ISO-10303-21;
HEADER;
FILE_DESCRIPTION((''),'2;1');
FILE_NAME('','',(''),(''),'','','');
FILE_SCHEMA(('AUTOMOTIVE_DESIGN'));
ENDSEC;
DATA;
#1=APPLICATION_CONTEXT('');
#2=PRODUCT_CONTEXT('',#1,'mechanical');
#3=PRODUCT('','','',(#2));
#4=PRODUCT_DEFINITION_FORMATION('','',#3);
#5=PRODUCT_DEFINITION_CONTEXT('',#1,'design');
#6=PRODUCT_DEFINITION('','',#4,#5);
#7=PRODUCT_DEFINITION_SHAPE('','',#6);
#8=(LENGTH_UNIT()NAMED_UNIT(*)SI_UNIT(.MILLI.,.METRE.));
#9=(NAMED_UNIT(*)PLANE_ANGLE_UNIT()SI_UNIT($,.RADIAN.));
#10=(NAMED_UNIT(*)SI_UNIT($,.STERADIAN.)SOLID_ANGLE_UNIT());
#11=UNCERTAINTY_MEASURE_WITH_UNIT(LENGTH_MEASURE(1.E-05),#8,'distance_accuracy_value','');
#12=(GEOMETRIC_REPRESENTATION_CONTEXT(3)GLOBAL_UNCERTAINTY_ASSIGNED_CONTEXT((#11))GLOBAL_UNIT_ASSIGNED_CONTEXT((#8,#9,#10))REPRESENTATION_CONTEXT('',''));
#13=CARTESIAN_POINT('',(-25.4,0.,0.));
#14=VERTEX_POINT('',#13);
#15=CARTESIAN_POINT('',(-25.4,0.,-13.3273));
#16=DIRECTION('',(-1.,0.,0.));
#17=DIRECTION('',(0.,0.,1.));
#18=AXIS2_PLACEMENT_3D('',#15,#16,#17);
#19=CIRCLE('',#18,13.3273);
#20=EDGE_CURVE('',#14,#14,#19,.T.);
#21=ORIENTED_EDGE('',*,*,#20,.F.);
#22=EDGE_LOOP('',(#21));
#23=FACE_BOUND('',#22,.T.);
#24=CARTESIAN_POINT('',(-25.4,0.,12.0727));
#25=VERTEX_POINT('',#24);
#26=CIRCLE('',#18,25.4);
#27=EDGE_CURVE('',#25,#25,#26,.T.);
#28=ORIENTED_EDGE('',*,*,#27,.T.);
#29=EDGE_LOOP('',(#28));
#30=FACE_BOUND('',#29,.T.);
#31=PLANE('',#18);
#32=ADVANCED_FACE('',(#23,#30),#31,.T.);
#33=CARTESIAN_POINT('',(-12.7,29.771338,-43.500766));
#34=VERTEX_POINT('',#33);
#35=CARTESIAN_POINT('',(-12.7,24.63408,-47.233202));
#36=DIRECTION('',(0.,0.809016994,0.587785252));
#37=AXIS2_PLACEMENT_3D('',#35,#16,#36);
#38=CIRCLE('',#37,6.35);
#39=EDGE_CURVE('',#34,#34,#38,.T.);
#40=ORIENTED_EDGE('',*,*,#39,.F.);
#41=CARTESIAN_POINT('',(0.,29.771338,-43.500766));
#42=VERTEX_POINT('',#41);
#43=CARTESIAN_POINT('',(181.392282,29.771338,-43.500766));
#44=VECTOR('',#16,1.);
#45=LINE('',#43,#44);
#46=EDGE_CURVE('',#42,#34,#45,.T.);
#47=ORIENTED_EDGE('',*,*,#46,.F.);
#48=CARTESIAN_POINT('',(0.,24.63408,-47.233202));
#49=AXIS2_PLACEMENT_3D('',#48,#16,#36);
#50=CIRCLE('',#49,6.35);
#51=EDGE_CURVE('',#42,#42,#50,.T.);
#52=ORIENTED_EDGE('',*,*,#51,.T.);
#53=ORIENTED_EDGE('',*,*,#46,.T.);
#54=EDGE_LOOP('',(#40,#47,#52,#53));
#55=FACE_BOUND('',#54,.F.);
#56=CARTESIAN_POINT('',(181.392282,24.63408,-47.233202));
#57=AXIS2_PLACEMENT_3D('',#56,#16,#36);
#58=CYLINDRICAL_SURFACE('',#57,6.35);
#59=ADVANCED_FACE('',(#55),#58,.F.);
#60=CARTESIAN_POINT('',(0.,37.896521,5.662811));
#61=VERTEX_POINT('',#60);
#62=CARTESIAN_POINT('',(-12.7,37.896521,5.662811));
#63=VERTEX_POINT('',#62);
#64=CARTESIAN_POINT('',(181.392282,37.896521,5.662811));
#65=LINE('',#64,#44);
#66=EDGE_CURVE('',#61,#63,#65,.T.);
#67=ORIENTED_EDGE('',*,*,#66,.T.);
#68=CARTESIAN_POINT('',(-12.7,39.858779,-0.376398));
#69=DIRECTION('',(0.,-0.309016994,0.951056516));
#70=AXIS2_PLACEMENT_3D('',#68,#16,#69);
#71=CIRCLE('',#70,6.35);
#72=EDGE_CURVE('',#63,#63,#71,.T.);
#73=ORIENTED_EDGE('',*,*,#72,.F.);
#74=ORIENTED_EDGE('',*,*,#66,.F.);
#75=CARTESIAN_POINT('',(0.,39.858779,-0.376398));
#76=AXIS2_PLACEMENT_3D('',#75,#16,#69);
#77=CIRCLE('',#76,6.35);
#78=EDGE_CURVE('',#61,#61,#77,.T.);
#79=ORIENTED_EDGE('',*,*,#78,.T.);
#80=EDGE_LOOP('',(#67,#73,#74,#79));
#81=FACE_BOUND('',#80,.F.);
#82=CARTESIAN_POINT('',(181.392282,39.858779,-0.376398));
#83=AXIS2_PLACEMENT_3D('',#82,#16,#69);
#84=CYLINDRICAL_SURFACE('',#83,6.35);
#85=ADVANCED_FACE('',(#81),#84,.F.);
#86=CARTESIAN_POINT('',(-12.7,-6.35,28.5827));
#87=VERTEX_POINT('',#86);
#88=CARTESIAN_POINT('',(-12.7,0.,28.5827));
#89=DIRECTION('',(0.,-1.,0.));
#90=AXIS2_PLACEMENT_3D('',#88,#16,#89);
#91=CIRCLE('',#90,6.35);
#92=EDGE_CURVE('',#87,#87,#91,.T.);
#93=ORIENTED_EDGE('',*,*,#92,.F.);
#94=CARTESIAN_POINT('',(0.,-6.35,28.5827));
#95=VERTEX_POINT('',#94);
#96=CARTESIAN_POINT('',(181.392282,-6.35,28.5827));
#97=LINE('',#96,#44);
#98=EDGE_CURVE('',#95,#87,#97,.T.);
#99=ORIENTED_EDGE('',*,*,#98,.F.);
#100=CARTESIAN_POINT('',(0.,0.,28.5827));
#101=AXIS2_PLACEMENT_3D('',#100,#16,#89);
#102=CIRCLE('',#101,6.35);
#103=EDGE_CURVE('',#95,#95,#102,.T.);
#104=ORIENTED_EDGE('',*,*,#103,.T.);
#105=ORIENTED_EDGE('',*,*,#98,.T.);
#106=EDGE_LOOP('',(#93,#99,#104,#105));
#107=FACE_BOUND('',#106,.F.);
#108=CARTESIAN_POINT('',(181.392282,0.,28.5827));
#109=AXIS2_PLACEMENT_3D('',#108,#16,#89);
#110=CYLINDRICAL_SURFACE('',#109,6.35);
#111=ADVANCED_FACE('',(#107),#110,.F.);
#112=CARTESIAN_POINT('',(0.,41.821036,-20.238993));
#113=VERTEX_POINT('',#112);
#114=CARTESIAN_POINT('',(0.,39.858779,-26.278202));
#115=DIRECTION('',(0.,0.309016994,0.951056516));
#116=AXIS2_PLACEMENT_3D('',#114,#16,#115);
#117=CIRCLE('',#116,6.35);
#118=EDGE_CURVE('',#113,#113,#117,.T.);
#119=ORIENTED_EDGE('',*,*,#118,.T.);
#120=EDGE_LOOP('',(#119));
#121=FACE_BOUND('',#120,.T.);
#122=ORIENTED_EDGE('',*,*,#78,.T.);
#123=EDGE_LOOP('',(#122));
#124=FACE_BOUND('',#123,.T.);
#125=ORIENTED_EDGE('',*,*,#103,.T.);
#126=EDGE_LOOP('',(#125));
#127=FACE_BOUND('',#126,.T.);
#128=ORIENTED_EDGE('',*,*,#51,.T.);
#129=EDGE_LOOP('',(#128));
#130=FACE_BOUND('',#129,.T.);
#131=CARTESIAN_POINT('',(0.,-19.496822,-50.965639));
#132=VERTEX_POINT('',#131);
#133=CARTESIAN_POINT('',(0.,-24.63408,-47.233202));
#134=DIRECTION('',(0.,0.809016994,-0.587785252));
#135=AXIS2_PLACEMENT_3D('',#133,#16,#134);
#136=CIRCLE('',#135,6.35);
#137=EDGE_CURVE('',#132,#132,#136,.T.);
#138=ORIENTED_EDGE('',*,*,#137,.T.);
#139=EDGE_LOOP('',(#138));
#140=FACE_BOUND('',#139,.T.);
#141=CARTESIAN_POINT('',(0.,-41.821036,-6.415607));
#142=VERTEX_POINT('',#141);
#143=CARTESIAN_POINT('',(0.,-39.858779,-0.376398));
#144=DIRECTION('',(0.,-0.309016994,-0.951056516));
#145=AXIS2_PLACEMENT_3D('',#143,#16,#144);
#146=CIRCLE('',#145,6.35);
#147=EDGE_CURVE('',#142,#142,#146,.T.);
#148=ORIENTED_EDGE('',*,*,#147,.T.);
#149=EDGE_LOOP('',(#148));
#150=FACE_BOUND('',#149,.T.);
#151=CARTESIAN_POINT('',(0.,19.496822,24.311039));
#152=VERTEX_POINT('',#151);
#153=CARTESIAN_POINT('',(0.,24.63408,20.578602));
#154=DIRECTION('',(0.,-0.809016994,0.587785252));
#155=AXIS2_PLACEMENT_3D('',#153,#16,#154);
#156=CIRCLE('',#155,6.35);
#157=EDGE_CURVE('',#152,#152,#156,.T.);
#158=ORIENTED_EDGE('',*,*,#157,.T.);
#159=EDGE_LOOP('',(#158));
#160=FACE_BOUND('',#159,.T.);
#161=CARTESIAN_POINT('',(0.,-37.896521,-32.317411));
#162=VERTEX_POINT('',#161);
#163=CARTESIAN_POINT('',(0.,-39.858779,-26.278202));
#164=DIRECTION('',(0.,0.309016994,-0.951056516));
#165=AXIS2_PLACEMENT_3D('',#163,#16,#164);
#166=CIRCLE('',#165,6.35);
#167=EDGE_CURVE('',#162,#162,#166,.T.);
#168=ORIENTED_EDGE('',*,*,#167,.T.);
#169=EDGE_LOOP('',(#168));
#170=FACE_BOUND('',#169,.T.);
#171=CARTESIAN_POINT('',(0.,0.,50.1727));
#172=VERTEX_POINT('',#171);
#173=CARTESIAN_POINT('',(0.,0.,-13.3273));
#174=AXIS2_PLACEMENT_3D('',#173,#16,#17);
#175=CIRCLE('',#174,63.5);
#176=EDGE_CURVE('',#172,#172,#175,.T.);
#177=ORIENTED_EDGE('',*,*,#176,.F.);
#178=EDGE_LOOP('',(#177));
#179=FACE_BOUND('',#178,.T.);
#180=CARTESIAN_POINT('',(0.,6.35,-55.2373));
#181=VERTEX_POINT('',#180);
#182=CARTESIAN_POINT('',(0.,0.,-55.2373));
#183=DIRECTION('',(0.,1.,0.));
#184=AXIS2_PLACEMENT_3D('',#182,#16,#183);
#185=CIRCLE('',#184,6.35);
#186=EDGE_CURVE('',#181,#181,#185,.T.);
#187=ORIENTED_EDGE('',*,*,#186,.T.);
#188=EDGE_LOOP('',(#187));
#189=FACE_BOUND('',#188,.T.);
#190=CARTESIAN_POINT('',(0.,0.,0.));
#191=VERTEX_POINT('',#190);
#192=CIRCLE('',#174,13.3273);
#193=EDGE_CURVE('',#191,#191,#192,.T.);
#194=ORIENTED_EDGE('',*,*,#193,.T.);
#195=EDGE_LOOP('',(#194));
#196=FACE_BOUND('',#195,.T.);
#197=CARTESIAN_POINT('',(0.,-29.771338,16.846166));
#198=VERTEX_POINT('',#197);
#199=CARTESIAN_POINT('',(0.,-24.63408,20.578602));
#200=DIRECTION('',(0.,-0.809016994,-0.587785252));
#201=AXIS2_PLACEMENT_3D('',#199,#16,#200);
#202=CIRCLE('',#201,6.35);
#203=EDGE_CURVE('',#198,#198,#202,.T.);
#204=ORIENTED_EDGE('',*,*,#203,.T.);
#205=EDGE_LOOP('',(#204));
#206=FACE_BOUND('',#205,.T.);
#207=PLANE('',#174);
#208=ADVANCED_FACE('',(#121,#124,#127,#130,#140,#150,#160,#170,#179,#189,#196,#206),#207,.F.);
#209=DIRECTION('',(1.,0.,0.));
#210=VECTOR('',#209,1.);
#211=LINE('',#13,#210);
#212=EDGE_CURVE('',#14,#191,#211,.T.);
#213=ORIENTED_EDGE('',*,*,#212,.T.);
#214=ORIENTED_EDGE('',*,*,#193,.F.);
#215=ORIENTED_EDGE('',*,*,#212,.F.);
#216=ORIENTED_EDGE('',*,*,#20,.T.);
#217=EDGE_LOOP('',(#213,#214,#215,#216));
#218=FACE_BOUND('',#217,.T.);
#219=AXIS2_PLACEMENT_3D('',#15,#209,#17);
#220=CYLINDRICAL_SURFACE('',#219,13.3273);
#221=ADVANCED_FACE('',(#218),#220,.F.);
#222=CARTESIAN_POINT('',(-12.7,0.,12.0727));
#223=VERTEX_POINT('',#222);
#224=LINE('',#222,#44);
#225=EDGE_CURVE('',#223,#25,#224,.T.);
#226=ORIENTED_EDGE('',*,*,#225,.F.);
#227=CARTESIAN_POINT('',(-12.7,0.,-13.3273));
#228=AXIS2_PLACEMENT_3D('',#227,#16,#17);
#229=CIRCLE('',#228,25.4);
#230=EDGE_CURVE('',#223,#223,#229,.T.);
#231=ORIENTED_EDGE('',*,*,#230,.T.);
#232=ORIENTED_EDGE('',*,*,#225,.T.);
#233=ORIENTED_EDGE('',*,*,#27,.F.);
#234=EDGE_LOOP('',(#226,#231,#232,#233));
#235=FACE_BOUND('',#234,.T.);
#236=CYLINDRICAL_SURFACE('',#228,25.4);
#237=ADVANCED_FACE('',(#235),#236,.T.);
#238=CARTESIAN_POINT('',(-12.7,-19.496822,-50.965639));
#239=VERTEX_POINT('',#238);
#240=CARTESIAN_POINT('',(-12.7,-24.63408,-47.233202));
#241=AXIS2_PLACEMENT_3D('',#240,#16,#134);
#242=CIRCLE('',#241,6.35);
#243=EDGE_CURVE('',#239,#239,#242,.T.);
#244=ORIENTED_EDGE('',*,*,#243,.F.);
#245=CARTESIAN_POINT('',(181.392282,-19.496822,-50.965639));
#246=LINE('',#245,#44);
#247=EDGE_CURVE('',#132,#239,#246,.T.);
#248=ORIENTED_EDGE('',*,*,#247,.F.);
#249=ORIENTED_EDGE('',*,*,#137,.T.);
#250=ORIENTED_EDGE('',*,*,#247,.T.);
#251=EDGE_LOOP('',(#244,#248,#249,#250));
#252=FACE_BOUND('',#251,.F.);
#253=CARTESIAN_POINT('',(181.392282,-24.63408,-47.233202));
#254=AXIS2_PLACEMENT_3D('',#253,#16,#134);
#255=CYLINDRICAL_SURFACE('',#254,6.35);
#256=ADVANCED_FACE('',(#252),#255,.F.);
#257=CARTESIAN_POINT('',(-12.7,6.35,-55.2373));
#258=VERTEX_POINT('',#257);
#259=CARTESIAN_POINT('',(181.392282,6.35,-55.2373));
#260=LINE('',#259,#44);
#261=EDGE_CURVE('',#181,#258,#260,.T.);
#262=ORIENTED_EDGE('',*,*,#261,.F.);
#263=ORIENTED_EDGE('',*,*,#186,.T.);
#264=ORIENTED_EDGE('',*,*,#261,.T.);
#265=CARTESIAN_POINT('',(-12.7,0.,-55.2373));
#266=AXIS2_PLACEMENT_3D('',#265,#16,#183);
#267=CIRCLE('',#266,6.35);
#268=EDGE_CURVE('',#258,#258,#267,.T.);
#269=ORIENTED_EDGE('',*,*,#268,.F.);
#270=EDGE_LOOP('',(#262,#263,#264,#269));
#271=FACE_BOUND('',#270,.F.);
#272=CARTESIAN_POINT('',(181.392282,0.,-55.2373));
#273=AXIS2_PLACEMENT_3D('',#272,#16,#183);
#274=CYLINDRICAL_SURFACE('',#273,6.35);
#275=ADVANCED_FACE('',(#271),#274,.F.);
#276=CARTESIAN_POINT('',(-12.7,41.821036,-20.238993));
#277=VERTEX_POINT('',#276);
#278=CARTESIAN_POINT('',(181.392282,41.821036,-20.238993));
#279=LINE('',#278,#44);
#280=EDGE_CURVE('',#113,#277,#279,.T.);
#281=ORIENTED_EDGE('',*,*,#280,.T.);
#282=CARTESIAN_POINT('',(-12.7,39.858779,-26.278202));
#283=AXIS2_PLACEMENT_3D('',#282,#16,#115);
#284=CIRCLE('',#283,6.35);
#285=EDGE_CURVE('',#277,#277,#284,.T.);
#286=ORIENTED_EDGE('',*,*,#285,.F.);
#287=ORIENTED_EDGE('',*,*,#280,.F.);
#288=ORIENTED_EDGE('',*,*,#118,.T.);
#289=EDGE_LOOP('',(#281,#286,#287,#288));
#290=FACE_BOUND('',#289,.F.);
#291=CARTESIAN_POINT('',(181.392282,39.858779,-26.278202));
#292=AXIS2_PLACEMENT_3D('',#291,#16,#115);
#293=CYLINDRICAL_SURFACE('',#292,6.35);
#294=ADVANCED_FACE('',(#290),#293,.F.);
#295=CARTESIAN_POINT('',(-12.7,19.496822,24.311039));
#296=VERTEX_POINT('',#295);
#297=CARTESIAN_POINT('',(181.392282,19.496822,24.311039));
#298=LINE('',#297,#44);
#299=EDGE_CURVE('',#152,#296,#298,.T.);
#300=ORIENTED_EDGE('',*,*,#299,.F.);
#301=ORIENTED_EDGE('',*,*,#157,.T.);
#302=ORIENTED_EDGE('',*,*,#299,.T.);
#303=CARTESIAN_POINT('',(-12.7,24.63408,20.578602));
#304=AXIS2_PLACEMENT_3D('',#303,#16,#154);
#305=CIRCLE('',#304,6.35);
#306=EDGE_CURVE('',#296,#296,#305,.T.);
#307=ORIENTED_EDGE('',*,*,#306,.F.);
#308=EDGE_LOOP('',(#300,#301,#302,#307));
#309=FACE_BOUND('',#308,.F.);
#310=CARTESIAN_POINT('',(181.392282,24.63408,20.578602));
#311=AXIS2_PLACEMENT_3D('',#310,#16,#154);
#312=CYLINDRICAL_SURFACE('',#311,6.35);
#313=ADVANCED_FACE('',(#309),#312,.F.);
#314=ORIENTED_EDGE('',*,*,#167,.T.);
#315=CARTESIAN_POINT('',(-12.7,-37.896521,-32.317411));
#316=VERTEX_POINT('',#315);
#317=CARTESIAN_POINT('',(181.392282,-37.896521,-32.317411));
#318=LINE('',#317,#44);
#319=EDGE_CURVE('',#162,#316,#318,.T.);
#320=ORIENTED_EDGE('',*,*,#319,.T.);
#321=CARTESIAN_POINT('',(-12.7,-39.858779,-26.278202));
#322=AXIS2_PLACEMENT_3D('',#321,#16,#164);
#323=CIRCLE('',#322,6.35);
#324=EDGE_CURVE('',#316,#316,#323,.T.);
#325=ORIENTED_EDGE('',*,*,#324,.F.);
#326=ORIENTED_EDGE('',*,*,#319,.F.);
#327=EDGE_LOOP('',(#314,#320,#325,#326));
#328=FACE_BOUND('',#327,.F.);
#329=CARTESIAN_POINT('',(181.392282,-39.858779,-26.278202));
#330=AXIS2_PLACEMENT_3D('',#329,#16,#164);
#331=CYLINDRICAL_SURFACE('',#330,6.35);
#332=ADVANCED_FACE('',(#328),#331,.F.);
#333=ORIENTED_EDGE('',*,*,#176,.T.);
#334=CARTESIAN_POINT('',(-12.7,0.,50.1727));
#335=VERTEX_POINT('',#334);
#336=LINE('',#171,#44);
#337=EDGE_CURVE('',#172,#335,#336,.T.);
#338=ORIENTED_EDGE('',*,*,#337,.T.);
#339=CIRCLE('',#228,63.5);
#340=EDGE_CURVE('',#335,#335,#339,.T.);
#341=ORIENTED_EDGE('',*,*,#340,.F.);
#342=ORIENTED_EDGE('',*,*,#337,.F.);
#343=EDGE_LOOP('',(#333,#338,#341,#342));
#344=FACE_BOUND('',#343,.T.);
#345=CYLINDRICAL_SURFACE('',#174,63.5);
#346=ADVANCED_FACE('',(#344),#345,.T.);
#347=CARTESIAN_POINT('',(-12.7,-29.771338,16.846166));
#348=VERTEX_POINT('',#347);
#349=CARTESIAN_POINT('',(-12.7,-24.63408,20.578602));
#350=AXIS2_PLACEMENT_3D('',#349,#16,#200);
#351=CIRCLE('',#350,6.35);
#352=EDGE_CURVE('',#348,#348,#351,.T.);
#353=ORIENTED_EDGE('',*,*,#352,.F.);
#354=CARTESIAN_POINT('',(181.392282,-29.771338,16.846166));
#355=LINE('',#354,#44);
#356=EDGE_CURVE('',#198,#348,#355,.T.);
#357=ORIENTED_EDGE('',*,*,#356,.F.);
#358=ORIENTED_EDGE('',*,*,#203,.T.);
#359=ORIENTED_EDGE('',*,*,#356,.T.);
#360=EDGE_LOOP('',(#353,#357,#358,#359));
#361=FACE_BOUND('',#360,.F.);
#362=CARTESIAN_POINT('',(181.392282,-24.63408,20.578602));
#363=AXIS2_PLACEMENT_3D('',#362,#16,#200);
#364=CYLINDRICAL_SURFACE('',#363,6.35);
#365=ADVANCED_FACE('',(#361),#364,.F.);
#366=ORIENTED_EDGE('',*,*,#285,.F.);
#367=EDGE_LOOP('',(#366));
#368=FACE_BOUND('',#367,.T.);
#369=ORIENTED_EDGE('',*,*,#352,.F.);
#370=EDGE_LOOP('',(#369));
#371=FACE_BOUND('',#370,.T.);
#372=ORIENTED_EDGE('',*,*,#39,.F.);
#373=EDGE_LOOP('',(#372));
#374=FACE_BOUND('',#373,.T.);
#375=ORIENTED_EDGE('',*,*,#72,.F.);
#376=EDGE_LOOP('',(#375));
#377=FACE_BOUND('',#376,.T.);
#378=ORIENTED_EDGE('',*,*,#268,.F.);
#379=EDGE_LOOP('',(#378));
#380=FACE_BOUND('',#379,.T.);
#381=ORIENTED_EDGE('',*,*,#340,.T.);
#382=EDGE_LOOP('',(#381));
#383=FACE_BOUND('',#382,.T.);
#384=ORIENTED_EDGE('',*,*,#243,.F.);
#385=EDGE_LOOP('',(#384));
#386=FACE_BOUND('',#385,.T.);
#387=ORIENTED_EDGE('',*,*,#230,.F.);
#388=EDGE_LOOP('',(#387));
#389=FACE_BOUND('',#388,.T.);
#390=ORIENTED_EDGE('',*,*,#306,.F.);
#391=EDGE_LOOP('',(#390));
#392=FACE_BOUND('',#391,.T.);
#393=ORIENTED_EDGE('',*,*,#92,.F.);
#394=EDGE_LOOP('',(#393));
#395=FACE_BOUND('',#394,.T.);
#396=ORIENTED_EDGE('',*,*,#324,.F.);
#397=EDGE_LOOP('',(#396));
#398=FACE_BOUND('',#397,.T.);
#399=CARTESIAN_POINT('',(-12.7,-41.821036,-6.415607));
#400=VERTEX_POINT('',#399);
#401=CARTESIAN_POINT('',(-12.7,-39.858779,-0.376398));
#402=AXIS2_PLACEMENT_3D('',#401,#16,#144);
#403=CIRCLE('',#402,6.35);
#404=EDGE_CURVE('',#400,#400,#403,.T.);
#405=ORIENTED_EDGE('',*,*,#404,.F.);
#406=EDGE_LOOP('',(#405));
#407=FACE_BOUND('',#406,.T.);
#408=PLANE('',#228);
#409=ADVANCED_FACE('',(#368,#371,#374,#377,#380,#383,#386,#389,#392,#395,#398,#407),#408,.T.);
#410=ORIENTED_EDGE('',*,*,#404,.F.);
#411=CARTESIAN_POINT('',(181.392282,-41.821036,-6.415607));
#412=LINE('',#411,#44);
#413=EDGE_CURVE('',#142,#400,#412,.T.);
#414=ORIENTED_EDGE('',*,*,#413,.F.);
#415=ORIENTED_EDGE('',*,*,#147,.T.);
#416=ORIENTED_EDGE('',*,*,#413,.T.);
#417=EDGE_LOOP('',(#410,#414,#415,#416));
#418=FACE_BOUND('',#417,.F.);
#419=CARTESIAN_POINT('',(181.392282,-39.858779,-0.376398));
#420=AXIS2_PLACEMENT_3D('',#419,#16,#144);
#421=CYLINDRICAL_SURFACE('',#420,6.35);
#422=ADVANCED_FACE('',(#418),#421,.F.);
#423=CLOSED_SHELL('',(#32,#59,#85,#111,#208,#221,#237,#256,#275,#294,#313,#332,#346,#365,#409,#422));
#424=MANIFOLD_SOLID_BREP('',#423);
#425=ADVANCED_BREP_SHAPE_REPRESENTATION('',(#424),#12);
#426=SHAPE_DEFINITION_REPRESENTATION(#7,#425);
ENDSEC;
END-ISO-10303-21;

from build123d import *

# Parameters (mm, degrees)
F3_D            = 12.7
F3_COPIES_COUNT = 10


# Not quite as in the source:
# - a pattern or mirror of a feature is missing from the dataset's text; its kind, count and spacing are read off the source's solid


with BuildPart() as f1:
    # F0 (on Front) → F1 (revolve)
    with BuildSketch(Plane.XZ):
        Polygon((-25.4, 0), (0, 0), (0, 50.172699946), (-12.7, 50.172699946), (-12.7, 12.072699946), (-25.4, 12.072699946), align=None)
    revolve(axis=Axis((-12.7, 0, -13.327300054), (-1, 0, 0)))

    # F3 (through all)
    with Locations(Plane.YZ):
        with Locations((0, 28.582699946)):
            f3 = Hole(F3_D / 2)

    # F3_copies: F3 ×10 about axis
    f3_copies_axis = Axis((0, 0, -13.3273), (1, 0, 0))
    for i in range(1, F3_COPIES_COUNT):
        add(f3.rotate(f3_copies_axis, i * 360 / F3_COPIES_COUNT), mode=Mode.SUBTRACT)


solid = f1.part
